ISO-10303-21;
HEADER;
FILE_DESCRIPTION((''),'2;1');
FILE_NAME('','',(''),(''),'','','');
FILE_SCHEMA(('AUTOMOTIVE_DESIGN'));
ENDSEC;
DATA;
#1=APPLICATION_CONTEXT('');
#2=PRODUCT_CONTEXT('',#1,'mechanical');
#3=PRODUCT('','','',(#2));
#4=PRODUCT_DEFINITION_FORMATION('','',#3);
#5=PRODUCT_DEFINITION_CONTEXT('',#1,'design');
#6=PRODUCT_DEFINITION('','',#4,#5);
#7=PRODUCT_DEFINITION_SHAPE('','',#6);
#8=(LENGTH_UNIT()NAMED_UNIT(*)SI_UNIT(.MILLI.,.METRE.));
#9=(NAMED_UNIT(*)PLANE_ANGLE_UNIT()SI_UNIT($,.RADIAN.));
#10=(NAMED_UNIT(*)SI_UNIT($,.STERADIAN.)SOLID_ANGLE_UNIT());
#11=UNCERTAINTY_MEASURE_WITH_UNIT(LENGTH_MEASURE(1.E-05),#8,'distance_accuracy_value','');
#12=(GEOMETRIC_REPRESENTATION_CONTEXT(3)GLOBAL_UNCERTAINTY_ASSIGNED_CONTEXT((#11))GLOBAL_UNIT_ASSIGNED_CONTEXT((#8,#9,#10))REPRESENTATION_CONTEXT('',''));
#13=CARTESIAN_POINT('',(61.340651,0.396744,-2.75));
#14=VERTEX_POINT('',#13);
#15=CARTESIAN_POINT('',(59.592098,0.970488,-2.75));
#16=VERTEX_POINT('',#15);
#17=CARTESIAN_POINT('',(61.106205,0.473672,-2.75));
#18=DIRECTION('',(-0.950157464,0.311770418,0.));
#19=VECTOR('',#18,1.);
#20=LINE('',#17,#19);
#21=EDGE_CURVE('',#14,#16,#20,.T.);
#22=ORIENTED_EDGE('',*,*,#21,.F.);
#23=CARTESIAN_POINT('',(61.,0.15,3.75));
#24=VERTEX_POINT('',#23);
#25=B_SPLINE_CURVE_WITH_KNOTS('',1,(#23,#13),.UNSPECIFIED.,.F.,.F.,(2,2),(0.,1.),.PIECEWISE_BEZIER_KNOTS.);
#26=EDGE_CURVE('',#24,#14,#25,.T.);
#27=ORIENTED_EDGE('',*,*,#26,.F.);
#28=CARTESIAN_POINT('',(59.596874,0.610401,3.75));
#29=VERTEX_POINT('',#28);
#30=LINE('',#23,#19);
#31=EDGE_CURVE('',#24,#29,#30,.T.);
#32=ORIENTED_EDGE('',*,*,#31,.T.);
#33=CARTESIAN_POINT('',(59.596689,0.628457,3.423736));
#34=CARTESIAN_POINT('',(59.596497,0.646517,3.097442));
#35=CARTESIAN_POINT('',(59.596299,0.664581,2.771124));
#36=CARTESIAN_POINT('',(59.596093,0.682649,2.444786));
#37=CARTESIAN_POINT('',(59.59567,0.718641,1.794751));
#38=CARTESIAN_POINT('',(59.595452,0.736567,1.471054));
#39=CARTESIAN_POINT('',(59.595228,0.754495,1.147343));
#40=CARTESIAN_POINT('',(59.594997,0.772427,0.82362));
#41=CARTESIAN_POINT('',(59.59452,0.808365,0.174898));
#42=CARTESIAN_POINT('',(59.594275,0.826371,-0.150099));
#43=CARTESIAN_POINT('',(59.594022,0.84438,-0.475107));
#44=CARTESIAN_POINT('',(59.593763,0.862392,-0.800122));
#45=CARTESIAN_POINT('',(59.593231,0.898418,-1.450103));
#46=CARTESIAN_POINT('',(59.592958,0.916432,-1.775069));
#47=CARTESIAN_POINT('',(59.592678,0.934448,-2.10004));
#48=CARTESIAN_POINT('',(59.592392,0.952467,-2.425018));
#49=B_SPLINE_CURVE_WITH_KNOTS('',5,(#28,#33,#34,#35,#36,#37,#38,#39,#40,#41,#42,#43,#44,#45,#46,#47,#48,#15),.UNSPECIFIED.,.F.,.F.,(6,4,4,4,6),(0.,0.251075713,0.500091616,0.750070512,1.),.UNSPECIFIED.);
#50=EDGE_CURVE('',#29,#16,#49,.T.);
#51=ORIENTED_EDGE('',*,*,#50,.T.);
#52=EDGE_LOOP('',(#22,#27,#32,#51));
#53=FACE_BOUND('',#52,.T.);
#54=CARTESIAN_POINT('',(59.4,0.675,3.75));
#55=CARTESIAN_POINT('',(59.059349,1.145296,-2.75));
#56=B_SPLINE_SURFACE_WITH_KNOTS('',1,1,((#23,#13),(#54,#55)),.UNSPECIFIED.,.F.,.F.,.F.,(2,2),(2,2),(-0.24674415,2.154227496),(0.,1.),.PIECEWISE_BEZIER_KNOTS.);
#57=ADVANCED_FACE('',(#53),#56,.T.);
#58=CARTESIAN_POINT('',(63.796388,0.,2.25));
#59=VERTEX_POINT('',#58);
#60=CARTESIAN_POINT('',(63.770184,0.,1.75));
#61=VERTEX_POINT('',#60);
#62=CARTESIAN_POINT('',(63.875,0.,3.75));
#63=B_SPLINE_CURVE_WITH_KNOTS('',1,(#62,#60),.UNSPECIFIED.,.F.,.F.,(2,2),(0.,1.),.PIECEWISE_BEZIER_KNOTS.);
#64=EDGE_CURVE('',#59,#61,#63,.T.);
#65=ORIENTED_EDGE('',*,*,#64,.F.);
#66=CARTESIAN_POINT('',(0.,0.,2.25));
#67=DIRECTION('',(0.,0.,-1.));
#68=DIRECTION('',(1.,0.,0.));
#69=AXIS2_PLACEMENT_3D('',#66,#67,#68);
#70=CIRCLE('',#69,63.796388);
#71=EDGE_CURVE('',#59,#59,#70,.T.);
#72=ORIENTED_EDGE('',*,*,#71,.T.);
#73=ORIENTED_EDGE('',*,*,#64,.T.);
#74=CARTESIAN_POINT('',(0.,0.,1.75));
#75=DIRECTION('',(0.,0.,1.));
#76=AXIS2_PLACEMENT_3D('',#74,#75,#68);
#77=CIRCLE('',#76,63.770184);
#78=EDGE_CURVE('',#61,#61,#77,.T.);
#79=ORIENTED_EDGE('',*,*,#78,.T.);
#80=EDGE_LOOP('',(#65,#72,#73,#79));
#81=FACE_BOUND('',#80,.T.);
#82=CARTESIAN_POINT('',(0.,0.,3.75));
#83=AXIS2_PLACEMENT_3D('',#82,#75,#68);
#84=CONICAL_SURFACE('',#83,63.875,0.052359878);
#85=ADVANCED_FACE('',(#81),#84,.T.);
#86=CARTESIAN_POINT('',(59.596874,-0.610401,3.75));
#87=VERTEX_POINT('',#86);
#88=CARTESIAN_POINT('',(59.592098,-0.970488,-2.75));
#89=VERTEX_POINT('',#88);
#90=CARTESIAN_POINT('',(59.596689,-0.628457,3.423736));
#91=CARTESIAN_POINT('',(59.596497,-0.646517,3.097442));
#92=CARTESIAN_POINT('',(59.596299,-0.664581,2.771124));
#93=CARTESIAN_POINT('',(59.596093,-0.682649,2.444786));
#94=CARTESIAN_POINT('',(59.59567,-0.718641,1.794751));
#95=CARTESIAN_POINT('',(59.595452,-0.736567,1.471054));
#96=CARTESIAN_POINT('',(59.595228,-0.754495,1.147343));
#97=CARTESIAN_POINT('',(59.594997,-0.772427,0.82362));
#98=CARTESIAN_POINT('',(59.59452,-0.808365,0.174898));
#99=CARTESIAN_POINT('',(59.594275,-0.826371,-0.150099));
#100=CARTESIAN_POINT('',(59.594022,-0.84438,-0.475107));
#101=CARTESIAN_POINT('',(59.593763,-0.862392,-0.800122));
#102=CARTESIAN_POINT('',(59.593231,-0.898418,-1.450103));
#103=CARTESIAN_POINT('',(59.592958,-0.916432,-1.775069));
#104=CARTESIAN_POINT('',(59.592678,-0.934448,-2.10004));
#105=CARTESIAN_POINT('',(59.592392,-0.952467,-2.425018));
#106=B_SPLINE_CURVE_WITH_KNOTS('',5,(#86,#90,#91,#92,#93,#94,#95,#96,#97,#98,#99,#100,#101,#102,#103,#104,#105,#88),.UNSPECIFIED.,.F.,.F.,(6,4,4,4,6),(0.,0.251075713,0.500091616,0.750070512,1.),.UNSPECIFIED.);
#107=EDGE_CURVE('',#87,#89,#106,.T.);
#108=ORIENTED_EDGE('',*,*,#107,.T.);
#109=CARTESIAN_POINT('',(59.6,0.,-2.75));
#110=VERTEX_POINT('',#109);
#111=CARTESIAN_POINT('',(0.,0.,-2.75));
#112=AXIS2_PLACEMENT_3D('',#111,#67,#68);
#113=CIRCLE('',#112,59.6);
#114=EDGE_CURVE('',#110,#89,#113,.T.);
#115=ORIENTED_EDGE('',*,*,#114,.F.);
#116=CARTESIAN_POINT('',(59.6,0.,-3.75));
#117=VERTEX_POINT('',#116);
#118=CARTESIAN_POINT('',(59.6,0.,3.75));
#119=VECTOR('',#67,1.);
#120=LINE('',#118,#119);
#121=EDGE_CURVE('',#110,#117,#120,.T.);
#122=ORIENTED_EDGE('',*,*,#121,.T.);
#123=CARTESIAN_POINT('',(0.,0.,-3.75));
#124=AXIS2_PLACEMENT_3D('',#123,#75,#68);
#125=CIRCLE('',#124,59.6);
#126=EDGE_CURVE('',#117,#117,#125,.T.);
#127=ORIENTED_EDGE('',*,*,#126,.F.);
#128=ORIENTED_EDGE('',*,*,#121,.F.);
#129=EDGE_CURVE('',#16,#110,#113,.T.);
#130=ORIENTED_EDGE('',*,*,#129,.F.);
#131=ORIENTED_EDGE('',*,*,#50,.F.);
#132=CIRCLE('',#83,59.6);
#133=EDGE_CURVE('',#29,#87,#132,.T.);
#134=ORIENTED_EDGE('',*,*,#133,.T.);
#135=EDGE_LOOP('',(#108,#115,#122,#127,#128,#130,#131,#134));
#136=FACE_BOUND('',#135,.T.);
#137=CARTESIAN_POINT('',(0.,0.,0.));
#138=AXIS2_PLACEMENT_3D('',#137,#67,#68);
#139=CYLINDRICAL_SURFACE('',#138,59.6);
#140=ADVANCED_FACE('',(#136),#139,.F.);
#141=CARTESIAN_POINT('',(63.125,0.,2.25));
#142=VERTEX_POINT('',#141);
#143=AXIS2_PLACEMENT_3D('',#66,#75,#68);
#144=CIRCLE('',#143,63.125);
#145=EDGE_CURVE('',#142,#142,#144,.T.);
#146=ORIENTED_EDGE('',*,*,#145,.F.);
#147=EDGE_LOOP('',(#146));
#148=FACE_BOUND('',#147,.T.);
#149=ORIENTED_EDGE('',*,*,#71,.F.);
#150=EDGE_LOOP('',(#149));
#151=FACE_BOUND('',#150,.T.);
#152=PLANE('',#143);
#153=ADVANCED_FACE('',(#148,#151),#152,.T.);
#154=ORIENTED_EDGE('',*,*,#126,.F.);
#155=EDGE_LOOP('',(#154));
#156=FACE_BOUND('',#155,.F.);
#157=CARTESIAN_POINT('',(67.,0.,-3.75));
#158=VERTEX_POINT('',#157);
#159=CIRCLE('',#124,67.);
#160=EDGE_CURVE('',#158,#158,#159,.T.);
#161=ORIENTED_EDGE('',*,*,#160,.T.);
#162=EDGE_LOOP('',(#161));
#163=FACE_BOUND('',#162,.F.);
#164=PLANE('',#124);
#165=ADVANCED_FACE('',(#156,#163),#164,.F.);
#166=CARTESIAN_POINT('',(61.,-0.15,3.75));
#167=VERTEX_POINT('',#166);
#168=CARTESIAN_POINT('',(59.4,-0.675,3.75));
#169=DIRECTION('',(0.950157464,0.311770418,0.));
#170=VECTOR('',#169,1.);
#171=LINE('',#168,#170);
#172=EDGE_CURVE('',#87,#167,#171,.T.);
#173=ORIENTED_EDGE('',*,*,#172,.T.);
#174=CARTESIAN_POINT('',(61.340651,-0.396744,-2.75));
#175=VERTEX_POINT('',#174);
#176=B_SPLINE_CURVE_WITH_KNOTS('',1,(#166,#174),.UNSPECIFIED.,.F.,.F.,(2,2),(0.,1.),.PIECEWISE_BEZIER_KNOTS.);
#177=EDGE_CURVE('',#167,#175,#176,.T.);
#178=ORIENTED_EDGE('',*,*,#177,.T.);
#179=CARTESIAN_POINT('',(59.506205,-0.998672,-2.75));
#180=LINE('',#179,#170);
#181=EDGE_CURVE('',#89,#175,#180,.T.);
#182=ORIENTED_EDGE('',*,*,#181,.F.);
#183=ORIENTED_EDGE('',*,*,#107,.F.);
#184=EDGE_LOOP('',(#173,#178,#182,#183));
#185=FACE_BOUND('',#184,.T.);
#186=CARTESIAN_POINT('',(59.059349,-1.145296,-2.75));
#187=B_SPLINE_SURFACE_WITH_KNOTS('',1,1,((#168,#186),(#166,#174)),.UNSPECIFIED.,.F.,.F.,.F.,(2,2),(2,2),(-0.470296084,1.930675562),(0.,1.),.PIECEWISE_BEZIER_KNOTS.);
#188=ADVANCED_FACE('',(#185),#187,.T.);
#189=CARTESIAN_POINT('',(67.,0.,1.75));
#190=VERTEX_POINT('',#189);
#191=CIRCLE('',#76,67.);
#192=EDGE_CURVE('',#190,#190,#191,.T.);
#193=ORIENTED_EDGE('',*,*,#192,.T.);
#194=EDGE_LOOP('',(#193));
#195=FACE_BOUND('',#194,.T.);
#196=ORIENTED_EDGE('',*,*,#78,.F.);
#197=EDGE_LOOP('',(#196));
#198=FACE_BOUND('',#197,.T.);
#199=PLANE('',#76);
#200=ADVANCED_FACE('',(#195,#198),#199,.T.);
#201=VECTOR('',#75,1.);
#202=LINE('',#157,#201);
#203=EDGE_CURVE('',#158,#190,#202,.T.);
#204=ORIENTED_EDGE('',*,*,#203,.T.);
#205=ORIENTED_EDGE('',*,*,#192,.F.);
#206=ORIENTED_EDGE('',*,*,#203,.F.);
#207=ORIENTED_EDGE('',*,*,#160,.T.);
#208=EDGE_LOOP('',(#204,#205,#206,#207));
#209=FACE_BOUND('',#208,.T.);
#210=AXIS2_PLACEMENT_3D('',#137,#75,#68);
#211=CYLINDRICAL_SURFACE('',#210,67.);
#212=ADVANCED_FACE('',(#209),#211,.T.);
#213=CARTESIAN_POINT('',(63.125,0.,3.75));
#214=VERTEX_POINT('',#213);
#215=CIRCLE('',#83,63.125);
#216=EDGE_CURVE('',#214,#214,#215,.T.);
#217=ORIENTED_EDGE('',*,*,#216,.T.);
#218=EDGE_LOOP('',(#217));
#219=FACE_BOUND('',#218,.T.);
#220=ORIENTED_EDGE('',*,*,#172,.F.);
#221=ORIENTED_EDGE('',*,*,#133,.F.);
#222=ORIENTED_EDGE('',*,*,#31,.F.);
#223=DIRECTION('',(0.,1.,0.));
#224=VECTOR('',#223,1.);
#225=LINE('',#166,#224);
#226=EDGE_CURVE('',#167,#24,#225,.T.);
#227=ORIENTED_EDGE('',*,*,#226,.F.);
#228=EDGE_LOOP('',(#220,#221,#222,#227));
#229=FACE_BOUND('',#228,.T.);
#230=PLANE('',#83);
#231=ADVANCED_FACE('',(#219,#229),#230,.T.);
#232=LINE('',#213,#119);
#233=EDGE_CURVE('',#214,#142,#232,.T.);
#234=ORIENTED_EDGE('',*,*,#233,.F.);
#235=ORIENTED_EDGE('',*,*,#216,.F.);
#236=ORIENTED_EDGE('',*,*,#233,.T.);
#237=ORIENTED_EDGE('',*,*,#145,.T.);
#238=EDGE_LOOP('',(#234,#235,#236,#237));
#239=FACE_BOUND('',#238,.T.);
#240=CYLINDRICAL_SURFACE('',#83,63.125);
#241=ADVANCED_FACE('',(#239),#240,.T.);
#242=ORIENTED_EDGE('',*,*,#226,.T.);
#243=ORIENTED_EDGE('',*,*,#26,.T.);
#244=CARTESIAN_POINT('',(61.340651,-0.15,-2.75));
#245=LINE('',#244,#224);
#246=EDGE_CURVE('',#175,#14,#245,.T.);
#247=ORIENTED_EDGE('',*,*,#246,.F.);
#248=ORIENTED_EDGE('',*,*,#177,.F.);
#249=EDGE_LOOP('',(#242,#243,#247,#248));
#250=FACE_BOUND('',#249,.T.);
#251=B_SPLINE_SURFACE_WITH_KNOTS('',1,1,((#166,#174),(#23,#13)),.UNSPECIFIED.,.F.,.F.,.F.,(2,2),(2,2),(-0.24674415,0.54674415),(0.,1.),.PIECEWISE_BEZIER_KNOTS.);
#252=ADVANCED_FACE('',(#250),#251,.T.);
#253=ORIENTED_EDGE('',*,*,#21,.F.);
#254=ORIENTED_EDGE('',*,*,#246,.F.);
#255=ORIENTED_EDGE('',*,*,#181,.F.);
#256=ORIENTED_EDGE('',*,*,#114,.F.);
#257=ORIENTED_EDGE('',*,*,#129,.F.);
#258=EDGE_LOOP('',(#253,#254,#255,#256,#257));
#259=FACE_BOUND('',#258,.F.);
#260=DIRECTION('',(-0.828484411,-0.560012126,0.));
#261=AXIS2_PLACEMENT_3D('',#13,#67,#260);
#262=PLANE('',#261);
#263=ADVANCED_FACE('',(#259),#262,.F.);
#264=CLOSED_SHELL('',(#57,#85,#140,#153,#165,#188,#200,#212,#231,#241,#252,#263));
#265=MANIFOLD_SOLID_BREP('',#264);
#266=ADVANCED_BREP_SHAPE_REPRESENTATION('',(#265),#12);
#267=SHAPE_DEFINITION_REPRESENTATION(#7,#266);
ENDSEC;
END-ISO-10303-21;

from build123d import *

# Parameters (mm, degrees)
F0_R        = 67
F0_R_2      = 59.6
F1_DEPTH    = 3.75
F2_R        = 63.875
F2_R_2      = 63.125
F3_DEPTH    = 1.5
F3_FACE_R   = 67
F3_FACE_R_2 = 63.875
F4_DEPTH    = 2
F4_TAPER    = -3
F7_DEPTH    = 6.5
F7_TAPER    = -3


# Not quite as in the source:
# - a feature of the source that left no trace in its solid (it failed there, or was rolled back) is left out


with BuildPart() as f1:
    # F0 (on Top) → F1 (new body, symmetric)
    with BuildSketch(Plane.XY):
        Circle(F0_R)
        Circle(F0_R_2, mode=Mode.SUBTRACT)
    extrude(amount=F1_DEPTH, both=True)

    # F2 (on face) → F3 (cut)
    with BuildSketch(Plane.XY.offset(3.75)):
        Circle(F2_R)
        Circle(F2_R_2, mode=Mode.SUBTRACT)
    extrude(amount=-F3_DEPTH, mode=Mode.SUBTRACT)

    # F3_face (on face) → F4 (cut)
    with BuildSketch(Plane.XY.offset(3.75)):
        Circle(F3_FACE_R)
        Circle(F3_FACE_R_2, mode=Mode.SUBTRACT)
    extrude(amount=-F4_DEPTH, taper=F4_TAPER, mode=Mode.SUBTRACT)

    # F6 (on face) → F7 (cut)
    with BuildSketch(Plane.XY.offset(3.75)):
        Polygon((61, 0.15), (59.4, 0.675), (59.4, -0.675), (61, -0.15), align=None)
    extrude(amount=-F7_DEPTH, taper=F7_TAPER, mode=Mode.SUBTRACT)


solid = f1.part
